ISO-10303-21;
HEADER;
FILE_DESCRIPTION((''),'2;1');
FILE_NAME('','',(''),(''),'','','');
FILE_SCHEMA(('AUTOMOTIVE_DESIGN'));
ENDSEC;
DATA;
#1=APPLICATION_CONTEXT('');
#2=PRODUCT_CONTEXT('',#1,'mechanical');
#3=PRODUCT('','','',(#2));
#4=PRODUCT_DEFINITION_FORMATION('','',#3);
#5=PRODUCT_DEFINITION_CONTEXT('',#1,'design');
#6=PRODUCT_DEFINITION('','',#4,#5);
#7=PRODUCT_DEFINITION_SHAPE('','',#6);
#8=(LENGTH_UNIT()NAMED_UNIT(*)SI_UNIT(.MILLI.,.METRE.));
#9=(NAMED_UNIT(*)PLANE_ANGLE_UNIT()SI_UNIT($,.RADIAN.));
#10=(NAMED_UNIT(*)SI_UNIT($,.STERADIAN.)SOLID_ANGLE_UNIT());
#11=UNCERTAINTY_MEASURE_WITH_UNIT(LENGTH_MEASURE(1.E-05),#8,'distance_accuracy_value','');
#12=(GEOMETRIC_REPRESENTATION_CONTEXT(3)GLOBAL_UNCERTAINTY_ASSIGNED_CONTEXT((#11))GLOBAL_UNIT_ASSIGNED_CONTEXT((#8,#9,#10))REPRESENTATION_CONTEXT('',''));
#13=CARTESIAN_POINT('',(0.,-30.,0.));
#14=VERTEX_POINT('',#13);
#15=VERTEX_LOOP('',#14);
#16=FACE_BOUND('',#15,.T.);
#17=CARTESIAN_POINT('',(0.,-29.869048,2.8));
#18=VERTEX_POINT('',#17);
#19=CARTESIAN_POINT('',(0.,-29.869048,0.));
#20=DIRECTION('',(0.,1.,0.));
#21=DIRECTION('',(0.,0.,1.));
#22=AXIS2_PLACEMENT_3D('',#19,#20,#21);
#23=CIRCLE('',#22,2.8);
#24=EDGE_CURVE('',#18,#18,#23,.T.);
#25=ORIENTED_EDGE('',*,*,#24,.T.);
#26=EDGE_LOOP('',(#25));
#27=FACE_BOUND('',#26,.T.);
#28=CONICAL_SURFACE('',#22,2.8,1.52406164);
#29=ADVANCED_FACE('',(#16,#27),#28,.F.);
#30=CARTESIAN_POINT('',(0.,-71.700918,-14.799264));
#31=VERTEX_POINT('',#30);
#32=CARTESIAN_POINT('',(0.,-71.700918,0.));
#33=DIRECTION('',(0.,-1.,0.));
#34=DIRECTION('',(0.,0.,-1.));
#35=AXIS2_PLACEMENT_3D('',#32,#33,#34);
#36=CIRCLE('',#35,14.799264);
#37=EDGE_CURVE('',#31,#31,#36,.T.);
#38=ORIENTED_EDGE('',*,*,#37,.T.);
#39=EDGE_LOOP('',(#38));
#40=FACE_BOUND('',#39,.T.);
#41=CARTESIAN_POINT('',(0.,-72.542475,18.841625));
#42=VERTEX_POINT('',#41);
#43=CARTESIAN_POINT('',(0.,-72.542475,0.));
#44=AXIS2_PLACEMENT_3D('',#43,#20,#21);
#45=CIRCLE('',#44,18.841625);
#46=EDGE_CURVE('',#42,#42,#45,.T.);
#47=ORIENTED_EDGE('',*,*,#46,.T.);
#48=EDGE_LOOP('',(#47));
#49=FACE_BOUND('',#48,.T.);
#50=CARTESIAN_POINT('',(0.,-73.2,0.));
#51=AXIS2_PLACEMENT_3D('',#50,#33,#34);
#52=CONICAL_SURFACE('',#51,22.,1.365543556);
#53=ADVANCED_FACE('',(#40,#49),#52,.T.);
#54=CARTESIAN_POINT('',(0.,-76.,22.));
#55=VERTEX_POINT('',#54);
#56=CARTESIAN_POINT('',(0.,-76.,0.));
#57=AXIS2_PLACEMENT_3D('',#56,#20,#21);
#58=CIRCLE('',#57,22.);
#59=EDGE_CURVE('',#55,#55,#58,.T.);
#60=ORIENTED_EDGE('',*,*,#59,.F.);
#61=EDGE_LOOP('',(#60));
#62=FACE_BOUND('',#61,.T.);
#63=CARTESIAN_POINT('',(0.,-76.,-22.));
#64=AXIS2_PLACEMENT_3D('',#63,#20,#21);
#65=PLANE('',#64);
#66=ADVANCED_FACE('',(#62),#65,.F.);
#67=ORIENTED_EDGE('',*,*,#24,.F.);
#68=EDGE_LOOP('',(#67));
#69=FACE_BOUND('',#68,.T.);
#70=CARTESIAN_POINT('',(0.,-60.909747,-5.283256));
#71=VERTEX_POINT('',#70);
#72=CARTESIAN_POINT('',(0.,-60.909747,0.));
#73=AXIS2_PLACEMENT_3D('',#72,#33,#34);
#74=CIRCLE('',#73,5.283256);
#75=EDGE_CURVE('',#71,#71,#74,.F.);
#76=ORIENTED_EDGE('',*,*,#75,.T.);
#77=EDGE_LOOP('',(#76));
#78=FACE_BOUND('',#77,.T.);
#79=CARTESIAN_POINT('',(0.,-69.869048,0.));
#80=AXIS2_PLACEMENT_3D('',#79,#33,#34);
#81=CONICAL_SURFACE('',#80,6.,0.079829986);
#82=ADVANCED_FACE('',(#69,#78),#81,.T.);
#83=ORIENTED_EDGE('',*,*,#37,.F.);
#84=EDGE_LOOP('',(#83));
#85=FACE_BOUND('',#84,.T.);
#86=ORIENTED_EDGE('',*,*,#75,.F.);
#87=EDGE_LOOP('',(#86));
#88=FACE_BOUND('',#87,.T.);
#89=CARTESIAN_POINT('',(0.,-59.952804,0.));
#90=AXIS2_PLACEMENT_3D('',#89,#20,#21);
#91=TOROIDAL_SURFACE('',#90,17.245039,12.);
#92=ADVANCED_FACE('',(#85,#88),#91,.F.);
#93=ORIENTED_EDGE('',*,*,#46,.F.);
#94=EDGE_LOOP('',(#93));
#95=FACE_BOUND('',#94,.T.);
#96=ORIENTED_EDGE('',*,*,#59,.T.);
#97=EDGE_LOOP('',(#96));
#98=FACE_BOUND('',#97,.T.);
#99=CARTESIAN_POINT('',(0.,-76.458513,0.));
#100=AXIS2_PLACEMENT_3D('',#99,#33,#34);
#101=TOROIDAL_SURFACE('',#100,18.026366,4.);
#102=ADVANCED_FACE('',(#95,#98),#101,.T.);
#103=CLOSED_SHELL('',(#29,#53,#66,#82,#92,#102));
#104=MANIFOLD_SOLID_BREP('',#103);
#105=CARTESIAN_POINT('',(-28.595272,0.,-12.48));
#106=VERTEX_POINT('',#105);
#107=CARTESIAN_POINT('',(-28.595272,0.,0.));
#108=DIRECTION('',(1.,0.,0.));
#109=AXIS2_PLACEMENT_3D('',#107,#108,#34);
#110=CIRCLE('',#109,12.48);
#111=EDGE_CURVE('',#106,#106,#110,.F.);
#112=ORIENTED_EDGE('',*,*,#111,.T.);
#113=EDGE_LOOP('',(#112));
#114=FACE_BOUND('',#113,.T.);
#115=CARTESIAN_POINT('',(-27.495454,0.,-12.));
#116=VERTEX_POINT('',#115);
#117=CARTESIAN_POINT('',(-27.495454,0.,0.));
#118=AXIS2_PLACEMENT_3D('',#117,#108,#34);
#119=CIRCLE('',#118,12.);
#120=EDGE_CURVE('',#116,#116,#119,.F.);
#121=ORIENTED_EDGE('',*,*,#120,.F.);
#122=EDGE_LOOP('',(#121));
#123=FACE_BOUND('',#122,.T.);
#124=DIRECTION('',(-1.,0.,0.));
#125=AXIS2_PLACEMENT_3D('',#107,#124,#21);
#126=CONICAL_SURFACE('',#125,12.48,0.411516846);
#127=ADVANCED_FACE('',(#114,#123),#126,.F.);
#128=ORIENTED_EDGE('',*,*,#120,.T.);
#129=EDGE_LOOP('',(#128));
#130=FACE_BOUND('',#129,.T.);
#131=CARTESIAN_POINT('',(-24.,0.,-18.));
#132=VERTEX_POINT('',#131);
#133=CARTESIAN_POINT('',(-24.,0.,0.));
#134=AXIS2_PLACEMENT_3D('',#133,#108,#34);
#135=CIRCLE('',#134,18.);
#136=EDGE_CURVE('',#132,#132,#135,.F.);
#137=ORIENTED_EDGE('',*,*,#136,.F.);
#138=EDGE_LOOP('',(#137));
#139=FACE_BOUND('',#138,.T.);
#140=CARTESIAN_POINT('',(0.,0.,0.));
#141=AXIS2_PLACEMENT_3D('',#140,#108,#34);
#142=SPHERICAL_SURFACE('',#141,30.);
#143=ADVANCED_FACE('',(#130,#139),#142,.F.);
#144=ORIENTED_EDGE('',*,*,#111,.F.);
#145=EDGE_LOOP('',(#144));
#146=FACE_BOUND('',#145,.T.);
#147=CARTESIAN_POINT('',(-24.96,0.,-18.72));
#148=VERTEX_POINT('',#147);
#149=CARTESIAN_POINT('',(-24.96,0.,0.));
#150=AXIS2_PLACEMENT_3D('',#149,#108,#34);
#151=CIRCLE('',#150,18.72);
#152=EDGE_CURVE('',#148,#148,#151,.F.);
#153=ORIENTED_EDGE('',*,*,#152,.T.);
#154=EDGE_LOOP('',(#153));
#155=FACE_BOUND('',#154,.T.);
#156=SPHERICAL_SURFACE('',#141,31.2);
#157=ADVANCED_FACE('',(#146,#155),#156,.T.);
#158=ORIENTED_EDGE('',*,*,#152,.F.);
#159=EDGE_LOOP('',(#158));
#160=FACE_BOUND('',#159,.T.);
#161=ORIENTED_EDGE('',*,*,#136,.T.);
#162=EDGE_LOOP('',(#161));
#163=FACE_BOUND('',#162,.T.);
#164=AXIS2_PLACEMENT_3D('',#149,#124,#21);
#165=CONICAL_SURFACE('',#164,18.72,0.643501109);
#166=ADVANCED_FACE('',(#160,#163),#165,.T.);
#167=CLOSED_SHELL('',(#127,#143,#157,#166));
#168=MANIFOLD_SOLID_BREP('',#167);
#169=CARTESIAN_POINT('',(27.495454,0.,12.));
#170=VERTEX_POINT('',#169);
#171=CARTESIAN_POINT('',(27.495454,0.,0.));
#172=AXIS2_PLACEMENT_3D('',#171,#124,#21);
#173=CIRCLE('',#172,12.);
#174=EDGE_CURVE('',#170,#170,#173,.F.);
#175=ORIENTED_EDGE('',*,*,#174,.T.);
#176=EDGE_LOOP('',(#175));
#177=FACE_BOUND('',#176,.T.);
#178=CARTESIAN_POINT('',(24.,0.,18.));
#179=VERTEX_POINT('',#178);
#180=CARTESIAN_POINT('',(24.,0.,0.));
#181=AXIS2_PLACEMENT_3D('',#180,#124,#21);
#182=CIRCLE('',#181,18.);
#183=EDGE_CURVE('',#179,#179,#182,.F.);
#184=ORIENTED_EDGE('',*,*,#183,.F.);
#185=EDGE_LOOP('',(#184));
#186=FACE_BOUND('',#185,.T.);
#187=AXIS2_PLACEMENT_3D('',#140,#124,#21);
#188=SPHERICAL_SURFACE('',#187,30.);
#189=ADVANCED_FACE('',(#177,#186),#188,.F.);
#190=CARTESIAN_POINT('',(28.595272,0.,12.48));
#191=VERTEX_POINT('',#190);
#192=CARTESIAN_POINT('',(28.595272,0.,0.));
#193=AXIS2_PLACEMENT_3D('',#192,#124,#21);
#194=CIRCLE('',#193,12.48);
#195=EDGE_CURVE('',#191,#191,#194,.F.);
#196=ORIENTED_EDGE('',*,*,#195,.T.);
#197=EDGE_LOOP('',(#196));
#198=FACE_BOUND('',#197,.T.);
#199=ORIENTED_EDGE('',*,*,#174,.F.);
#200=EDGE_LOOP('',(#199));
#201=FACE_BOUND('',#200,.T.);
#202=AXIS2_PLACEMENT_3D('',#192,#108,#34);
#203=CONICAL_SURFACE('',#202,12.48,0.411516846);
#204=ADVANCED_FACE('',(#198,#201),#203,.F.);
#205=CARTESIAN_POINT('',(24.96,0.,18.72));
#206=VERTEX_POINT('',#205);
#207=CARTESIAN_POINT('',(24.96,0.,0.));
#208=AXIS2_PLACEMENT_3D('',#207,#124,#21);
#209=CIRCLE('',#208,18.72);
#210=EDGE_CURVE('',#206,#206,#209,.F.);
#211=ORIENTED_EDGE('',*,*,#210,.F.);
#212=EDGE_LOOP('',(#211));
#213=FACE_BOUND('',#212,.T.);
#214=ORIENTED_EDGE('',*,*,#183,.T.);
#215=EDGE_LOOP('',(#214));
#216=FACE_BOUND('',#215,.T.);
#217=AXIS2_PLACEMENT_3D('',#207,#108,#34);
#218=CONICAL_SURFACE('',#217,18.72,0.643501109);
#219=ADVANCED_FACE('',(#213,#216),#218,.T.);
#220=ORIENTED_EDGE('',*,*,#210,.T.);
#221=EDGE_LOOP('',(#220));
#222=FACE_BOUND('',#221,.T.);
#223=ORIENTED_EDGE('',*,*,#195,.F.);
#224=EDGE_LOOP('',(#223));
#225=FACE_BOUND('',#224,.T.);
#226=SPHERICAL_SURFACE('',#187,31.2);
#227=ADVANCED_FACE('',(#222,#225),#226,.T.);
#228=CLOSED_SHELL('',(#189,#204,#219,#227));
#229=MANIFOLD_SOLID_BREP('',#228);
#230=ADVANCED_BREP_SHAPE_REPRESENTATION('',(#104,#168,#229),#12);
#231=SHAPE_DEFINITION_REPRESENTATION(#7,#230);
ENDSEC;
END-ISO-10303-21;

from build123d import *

# Parameters (mm, degrees)
FILLET2_R      = 30
THICKEN2_ANGLE = 180
SCALE7_SCALE   = 0.4


with BuildPart() as part:
    # Sketch3 → Revolve1 (revolve)
    with BuildSketch(Plane(origin=(0, 0, 0), x_dir=(0, 0, -1), z_dir=(1, 0, 0)), mode=Mode.PRIVATE) as revolve1_sk:
        Polygon((0, -75), (7, -74.67261881), (15, -174.67261881), (55, -183), (55, -190), (0, -190), align=None)
    revolve(revolve1_sk.sketch.rotate(Axis((0, 0, 0), (0, -1, 0)), 180), axis=Axis((0, 0, 0), (0, -1, 0)))

    # Fillet1: read off the stored shape, not the designer's step
    # Fillet1 outline → Fillet1 (revolve, cut)
    with BuildSketch(Plane.XY):
        with BuildLine():
            Line((55, -181.356187813), (47.104061772, -181.356187813))
            ThreePointArc((47.104061772, -181.356187813), (52.449170173, -184.401836942), (55, -190))
            Line((55, -190), (55, -181.356187813))
        make_face()
    revolve(axis=Axis((0, 0, 0), (0, 1, 0)), mode=Mode.SUBTRACT)

    # Fillet2
    fillet2_edges = [part.edges().sort_by_distance(p)[0] for p in [
        (0, -174.67261881, -15),
    ]]
    fillet(fillet2_edges, radius=FILLET2_R)


with BuildPart() as body_2:
    # Thicken1: read off the stored shape, not the designer's step
    # Thicken1 outline → Thicken1 (revolve)
    with BuildSketch(Plane.YX):
        with BuildLine():
            Line((46.800000062, -62.399999953), (45.00000006, -59.999999955))
            ThreePointArc((45.00000006, -59.999999955), (37.753687731, -64.804776543), (29.999999931, -68.738635454))
            Line((29.999999931, -68.738635454), (31.199999929, -71.488180873))
            ThreePointArc((31.199999929, -71.488180873), (39.26383524, -67.396967604), (46.800000062, -62.399999953))
        make_face()
    revolve(axis=Axis((0, 0, 0), (1, 0, 0)))


with BuildPart() as body_3:
    # Thicken2: read off the stored shape, not the designer's step
    # Thicken2: copy of body 2
    add(body_2.part.rotate(Axis((0, 0, 0), (0, 1, 0)), THICKEN2_ANGLE))


with BuildPart() as body_3_1:
    # Scale7: scaled about (0, 0, 0)
    add(body_3.part.scale(SCALE7_SCALE))


with BuildPart() as part_1:
    # Scale7: scaled about (0, 0, 0)
    add(part.part.scale(SCALE7_SCALE))


with BuildPart() as body_2_1:
    # Scale7: scaled about (0, 0, 0)
    add(body_2.part.scale(SCALE7_SCALE))


solid = Compound([body_3_1.part, part_1.part, body_2_1.part])
